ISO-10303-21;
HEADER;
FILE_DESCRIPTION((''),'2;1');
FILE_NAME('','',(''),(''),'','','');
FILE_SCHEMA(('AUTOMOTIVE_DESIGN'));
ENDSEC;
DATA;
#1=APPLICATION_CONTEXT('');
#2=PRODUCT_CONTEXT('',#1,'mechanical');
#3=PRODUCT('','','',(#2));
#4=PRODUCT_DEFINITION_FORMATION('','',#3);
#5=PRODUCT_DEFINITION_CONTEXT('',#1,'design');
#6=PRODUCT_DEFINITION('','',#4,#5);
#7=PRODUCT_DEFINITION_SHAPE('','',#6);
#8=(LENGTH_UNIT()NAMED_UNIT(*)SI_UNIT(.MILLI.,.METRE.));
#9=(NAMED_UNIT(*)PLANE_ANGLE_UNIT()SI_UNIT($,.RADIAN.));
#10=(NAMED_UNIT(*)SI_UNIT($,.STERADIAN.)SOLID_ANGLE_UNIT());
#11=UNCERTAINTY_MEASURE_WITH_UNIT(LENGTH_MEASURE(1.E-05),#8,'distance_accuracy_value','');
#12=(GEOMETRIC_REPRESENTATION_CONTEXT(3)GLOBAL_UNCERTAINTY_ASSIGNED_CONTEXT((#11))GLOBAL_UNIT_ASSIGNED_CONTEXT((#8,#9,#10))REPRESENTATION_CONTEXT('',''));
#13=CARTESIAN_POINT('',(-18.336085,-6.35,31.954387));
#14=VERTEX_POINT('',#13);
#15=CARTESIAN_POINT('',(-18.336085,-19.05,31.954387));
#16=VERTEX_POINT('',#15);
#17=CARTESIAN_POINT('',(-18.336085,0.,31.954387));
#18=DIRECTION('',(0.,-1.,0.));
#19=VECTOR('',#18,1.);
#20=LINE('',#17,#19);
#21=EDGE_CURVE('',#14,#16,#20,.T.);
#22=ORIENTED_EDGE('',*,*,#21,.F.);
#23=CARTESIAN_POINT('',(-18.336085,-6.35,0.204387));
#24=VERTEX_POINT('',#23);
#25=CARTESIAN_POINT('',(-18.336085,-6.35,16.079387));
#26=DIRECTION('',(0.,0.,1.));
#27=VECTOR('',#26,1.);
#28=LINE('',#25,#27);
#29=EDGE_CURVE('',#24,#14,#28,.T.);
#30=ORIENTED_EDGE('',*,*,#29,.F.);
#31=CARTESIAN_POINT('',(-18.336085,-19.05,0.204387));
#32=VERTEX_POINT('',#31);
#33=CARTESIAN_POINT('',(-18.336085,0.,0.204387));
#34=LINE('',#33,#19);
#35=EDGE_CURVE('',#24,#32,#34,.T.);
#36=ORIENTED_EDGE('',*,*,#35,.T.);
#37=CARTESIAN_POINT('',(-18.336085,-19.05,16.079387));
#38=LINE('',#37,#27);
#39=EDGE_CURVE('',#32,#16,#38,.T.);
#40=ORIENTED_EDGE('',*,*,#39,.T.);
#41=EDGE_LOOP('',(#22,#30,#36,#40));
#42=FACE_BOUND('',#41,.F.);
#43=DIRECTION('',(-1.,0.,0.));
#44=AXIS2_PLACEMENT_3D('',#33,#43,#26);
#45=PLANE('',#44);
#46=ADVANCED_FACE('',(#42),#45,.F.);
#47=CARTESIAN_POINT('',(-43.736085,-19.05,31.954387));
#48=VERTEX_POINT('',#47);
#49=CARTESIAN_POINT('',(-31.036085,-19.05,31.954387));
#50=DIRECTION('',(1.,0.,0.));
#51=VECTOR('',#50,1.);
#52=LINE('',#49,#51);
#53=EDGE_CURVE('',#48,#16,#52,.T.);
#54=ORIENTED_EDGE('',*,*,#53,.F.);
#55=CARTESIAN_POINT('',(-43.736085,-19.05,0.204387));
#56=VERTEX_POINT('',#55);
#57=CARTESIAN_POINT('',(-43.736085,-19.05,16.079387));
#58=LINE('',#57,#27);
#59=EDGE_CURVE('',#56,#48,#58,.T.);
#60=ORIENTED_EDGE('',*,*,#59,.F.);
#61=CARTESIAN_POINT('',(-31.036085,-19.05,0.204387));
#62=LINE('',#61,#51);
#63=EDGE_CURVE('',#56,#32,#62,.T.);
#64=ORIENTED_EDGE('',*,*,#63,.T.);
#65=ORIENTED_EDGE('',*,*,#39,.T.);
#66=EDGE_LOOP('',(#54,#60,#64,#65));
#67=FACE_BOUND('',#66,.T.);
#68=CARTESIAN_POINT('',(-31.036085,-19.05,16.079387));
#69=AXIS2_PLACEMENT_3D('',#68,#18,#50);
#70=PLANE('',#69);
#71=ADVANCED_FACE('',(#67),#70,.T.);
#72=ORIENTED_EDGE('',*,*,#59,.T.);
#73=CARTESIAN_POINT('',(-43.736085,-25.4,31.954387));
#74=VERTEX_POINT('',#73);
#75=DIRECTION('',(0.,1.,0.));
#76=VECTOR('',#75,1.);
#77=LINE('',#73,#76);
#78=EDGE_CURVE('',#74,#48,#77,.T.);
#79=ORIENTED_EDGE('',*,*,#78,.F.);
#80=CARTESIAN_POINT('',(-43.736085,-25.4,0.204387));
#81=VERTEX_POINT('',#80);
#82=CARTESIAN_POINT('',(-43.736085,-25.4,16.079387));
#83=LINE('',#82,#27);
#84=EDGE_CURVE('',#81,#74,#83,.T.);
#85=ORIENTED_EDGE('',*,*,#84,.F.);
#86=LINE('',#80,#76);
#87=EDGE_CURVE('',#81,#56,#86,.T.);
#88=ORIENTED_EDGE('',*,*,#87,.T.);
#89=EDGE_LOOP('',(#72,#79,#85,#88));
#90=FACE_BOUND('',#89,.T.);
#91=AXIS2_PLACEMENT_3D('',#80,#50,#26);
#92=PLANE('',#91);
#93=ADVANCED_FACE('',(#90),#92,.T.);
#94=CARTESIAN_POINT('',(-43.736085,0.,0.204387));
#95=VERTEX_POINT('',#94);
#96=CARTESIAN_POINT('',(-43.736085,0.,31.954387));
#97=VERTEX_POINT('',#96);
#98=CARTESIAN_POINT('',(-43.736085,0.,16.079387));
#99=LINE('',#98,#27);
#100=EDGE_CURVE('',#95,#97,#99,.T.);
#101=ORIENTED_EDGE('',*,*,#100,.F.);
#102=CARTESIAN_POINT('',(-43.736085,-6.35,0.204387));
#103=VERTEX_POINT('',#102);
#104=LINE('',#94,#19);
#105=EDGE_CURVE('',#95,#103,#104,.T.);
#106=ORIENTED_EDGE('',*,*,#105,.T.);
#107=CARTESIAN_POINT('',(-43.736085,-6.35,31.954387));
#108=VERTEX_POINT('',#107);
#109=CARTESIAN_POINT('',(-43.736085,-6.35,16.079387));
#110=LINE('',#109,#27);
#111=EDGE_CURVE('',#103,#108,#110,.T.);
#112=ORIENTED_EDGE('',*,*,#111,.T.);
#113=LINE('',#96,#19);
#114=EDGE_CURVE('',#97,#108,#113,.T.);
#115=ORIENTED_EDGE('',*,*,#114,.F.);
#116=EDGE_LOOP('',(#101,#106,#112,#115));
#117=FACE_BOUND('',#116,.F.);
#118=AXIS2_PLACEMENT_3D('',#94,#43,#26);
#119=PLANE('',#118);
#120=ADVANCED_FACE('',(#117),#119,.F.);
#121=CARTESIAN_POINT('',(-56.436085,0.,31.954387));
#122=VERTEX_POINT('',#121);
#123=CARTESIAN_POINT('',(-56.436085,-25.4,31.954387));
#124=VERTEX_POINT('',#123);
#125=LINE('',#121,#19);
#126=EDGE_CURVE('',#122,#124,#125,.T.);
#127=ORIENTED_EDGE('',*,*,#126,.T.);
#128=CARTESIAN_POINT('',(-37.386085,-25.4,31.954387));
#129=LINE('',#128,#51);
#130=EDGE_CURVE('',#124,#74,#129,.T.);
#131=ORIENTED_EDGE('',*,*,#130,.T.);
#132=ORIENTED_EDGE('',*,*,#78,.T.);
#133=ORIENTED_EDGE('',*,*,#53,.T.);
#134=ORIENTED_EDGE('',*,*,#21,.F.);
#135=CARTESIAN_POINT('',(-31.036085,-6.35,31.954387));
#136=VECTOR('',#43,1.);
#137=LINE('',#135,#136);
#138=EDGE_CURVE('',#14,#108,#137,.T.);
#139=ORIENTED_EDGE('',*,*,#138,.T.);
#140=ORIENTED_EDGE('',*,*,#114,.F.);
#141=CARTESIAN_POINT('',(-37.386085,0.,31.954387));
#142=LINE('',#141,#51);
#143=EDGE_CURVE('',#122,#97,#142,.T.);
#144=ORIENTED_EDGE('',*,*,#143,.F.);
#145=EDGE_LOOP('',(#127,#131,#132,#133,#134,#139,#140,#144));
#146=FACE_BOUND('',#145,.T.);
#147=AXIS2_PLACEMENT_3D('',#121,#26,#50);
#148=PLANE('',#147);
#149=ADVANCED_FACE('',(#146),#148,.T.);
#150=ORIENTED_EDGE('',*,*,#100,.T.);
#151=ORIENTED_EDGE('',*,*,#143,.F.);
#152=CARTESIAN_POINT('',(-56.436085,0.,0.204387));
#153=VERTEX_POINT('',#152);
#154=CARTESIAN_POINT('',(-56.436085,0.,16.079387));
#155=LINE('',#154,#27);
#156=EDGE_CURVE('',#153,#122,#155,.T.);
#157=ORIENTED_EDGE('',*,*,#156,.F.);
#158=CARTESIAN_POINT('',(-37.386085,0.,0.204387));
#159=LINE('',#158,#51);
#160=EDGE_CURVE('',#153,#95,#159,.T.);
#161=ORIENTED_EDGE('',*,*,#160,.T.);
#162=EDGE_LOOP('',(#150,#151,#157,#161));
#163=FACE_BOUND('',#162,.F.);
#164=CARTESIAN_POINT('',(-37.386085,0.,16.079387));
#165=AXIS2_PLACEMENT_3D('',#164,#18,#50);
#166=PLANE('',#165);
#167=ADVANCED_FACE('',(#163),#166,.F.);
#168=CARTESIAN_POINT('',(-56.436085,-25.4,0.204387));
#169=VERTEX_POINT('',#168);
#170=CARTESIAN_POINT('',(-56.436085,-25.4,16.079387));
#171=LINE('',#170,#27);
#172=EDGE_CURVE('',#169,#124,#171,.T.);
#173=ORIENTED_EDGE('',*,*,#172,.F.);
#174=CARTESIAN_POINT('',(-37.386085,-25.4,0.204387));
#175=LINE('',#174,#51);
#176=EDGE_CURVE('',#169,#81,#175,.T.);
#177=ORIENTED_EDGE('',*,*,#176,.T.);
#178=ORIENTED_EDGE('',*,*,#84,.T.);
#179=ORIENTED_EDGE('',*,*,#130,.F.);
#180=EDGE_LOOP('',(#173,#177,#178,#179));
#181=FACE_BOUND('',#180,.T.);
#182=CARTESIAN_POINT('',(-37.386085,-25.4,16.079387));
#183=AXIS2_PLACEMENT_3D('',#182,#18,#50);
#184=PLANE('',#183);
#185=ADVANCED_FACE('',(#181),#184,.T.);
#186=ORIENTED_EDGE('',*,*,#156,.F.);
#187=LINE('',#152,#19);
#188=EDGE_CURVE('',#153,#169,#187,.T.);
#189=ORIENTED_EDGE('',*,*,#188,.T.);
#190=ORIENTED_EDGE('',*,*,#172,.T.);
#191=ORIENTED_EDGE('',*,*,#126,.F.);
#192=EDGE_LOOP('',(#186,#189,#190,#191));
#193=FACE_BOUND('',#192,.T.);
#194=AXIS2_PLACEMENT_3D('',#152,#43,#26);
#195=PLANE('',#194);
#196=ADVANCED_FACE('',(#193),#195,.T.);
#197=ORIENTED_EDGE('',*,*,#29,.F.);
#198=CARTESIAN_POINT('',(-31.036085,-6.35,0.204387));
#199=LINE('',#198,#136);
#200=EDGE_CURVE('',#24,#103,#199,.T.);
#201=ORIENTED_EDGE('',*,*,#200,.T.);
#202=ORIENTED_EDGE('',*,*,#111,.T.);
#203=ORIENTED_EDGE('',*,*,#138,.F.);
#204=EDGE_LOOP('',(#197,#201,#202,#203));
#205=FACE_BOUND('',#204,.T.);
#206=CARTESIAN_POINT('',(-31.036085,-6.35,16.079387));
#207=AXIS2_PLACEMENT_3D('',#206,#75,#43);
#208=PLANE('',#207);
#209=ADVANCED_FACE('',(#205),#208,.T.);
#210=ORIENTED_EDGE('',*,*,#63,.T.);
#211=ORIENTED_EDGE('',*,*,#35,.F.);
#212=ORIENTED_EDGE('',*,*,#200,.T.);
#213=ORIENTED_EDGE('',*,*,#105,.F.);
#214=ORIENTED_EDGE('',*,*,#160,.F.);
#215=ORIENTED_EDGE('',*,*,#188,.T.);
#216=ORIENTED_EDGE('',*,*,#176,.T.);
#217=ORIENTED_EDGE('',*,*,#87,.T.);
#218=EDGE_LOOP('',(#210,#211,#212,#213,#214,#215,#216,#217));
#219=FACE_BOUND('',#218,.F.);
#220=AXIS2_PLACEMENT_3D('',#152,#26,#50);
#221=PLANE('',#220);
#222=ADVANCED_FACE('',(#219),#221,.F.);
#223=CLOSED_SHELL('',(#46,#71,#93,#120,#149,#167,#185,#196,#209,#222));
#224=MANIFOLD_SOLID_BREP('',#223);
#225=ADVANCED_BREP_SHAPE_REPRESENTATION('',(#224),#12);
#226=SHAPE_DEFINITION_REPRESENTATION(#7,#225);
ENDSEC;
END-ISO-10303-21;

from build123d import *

# Parameters (mm, degrees)
F0_W     = 38.1
F0_H     = 31.75
F1_DEPTH = 25.4
F2_W     = 25.4
F2_H     = 31.75
F3_DEPTH = 6.35
F4_W     = 25.4
F4_H     = 31.75
F5_DEPTH = 6.35


# Not quite as in the source:
# - a feature names something its author has since deleted; it is built from what else it names


with BuildPart() as f1:
    # F0 (on Front) → F1 (new body)
    with BuildSketch(Plane.XZ):
        with Locations((-37.3860847076, 16.0793865216)):
            Rectangle(F0_W, F0_H)
    extrude(amount=F1_DEPTH)

    # F2 (on face) → F3 (cut)
    with BuildSketch(Plane.XZ.offset(25.4)):
        with Locations((-31.0360847076, 16.0793865216)):
            Rectangle(F2_W, F2_H)
    extrude(amount=-F3_DEPTH, mode=Mode.SUBTRACT)

    # F4 (on face) → F5 (cut)
    with BuildSketch(Plane(origin=(0, 0, 0), x_dir=(-1, 0, 0), z_dir=(0, 1, 0))):
        with Locations((31.0360847076, 16.0793865216)):
            Rectangle(F4_W, F4_H)
    extrude(amount=-F5_DEPTH, mode=Mode.SUBTRACT)


solid = f1.part
